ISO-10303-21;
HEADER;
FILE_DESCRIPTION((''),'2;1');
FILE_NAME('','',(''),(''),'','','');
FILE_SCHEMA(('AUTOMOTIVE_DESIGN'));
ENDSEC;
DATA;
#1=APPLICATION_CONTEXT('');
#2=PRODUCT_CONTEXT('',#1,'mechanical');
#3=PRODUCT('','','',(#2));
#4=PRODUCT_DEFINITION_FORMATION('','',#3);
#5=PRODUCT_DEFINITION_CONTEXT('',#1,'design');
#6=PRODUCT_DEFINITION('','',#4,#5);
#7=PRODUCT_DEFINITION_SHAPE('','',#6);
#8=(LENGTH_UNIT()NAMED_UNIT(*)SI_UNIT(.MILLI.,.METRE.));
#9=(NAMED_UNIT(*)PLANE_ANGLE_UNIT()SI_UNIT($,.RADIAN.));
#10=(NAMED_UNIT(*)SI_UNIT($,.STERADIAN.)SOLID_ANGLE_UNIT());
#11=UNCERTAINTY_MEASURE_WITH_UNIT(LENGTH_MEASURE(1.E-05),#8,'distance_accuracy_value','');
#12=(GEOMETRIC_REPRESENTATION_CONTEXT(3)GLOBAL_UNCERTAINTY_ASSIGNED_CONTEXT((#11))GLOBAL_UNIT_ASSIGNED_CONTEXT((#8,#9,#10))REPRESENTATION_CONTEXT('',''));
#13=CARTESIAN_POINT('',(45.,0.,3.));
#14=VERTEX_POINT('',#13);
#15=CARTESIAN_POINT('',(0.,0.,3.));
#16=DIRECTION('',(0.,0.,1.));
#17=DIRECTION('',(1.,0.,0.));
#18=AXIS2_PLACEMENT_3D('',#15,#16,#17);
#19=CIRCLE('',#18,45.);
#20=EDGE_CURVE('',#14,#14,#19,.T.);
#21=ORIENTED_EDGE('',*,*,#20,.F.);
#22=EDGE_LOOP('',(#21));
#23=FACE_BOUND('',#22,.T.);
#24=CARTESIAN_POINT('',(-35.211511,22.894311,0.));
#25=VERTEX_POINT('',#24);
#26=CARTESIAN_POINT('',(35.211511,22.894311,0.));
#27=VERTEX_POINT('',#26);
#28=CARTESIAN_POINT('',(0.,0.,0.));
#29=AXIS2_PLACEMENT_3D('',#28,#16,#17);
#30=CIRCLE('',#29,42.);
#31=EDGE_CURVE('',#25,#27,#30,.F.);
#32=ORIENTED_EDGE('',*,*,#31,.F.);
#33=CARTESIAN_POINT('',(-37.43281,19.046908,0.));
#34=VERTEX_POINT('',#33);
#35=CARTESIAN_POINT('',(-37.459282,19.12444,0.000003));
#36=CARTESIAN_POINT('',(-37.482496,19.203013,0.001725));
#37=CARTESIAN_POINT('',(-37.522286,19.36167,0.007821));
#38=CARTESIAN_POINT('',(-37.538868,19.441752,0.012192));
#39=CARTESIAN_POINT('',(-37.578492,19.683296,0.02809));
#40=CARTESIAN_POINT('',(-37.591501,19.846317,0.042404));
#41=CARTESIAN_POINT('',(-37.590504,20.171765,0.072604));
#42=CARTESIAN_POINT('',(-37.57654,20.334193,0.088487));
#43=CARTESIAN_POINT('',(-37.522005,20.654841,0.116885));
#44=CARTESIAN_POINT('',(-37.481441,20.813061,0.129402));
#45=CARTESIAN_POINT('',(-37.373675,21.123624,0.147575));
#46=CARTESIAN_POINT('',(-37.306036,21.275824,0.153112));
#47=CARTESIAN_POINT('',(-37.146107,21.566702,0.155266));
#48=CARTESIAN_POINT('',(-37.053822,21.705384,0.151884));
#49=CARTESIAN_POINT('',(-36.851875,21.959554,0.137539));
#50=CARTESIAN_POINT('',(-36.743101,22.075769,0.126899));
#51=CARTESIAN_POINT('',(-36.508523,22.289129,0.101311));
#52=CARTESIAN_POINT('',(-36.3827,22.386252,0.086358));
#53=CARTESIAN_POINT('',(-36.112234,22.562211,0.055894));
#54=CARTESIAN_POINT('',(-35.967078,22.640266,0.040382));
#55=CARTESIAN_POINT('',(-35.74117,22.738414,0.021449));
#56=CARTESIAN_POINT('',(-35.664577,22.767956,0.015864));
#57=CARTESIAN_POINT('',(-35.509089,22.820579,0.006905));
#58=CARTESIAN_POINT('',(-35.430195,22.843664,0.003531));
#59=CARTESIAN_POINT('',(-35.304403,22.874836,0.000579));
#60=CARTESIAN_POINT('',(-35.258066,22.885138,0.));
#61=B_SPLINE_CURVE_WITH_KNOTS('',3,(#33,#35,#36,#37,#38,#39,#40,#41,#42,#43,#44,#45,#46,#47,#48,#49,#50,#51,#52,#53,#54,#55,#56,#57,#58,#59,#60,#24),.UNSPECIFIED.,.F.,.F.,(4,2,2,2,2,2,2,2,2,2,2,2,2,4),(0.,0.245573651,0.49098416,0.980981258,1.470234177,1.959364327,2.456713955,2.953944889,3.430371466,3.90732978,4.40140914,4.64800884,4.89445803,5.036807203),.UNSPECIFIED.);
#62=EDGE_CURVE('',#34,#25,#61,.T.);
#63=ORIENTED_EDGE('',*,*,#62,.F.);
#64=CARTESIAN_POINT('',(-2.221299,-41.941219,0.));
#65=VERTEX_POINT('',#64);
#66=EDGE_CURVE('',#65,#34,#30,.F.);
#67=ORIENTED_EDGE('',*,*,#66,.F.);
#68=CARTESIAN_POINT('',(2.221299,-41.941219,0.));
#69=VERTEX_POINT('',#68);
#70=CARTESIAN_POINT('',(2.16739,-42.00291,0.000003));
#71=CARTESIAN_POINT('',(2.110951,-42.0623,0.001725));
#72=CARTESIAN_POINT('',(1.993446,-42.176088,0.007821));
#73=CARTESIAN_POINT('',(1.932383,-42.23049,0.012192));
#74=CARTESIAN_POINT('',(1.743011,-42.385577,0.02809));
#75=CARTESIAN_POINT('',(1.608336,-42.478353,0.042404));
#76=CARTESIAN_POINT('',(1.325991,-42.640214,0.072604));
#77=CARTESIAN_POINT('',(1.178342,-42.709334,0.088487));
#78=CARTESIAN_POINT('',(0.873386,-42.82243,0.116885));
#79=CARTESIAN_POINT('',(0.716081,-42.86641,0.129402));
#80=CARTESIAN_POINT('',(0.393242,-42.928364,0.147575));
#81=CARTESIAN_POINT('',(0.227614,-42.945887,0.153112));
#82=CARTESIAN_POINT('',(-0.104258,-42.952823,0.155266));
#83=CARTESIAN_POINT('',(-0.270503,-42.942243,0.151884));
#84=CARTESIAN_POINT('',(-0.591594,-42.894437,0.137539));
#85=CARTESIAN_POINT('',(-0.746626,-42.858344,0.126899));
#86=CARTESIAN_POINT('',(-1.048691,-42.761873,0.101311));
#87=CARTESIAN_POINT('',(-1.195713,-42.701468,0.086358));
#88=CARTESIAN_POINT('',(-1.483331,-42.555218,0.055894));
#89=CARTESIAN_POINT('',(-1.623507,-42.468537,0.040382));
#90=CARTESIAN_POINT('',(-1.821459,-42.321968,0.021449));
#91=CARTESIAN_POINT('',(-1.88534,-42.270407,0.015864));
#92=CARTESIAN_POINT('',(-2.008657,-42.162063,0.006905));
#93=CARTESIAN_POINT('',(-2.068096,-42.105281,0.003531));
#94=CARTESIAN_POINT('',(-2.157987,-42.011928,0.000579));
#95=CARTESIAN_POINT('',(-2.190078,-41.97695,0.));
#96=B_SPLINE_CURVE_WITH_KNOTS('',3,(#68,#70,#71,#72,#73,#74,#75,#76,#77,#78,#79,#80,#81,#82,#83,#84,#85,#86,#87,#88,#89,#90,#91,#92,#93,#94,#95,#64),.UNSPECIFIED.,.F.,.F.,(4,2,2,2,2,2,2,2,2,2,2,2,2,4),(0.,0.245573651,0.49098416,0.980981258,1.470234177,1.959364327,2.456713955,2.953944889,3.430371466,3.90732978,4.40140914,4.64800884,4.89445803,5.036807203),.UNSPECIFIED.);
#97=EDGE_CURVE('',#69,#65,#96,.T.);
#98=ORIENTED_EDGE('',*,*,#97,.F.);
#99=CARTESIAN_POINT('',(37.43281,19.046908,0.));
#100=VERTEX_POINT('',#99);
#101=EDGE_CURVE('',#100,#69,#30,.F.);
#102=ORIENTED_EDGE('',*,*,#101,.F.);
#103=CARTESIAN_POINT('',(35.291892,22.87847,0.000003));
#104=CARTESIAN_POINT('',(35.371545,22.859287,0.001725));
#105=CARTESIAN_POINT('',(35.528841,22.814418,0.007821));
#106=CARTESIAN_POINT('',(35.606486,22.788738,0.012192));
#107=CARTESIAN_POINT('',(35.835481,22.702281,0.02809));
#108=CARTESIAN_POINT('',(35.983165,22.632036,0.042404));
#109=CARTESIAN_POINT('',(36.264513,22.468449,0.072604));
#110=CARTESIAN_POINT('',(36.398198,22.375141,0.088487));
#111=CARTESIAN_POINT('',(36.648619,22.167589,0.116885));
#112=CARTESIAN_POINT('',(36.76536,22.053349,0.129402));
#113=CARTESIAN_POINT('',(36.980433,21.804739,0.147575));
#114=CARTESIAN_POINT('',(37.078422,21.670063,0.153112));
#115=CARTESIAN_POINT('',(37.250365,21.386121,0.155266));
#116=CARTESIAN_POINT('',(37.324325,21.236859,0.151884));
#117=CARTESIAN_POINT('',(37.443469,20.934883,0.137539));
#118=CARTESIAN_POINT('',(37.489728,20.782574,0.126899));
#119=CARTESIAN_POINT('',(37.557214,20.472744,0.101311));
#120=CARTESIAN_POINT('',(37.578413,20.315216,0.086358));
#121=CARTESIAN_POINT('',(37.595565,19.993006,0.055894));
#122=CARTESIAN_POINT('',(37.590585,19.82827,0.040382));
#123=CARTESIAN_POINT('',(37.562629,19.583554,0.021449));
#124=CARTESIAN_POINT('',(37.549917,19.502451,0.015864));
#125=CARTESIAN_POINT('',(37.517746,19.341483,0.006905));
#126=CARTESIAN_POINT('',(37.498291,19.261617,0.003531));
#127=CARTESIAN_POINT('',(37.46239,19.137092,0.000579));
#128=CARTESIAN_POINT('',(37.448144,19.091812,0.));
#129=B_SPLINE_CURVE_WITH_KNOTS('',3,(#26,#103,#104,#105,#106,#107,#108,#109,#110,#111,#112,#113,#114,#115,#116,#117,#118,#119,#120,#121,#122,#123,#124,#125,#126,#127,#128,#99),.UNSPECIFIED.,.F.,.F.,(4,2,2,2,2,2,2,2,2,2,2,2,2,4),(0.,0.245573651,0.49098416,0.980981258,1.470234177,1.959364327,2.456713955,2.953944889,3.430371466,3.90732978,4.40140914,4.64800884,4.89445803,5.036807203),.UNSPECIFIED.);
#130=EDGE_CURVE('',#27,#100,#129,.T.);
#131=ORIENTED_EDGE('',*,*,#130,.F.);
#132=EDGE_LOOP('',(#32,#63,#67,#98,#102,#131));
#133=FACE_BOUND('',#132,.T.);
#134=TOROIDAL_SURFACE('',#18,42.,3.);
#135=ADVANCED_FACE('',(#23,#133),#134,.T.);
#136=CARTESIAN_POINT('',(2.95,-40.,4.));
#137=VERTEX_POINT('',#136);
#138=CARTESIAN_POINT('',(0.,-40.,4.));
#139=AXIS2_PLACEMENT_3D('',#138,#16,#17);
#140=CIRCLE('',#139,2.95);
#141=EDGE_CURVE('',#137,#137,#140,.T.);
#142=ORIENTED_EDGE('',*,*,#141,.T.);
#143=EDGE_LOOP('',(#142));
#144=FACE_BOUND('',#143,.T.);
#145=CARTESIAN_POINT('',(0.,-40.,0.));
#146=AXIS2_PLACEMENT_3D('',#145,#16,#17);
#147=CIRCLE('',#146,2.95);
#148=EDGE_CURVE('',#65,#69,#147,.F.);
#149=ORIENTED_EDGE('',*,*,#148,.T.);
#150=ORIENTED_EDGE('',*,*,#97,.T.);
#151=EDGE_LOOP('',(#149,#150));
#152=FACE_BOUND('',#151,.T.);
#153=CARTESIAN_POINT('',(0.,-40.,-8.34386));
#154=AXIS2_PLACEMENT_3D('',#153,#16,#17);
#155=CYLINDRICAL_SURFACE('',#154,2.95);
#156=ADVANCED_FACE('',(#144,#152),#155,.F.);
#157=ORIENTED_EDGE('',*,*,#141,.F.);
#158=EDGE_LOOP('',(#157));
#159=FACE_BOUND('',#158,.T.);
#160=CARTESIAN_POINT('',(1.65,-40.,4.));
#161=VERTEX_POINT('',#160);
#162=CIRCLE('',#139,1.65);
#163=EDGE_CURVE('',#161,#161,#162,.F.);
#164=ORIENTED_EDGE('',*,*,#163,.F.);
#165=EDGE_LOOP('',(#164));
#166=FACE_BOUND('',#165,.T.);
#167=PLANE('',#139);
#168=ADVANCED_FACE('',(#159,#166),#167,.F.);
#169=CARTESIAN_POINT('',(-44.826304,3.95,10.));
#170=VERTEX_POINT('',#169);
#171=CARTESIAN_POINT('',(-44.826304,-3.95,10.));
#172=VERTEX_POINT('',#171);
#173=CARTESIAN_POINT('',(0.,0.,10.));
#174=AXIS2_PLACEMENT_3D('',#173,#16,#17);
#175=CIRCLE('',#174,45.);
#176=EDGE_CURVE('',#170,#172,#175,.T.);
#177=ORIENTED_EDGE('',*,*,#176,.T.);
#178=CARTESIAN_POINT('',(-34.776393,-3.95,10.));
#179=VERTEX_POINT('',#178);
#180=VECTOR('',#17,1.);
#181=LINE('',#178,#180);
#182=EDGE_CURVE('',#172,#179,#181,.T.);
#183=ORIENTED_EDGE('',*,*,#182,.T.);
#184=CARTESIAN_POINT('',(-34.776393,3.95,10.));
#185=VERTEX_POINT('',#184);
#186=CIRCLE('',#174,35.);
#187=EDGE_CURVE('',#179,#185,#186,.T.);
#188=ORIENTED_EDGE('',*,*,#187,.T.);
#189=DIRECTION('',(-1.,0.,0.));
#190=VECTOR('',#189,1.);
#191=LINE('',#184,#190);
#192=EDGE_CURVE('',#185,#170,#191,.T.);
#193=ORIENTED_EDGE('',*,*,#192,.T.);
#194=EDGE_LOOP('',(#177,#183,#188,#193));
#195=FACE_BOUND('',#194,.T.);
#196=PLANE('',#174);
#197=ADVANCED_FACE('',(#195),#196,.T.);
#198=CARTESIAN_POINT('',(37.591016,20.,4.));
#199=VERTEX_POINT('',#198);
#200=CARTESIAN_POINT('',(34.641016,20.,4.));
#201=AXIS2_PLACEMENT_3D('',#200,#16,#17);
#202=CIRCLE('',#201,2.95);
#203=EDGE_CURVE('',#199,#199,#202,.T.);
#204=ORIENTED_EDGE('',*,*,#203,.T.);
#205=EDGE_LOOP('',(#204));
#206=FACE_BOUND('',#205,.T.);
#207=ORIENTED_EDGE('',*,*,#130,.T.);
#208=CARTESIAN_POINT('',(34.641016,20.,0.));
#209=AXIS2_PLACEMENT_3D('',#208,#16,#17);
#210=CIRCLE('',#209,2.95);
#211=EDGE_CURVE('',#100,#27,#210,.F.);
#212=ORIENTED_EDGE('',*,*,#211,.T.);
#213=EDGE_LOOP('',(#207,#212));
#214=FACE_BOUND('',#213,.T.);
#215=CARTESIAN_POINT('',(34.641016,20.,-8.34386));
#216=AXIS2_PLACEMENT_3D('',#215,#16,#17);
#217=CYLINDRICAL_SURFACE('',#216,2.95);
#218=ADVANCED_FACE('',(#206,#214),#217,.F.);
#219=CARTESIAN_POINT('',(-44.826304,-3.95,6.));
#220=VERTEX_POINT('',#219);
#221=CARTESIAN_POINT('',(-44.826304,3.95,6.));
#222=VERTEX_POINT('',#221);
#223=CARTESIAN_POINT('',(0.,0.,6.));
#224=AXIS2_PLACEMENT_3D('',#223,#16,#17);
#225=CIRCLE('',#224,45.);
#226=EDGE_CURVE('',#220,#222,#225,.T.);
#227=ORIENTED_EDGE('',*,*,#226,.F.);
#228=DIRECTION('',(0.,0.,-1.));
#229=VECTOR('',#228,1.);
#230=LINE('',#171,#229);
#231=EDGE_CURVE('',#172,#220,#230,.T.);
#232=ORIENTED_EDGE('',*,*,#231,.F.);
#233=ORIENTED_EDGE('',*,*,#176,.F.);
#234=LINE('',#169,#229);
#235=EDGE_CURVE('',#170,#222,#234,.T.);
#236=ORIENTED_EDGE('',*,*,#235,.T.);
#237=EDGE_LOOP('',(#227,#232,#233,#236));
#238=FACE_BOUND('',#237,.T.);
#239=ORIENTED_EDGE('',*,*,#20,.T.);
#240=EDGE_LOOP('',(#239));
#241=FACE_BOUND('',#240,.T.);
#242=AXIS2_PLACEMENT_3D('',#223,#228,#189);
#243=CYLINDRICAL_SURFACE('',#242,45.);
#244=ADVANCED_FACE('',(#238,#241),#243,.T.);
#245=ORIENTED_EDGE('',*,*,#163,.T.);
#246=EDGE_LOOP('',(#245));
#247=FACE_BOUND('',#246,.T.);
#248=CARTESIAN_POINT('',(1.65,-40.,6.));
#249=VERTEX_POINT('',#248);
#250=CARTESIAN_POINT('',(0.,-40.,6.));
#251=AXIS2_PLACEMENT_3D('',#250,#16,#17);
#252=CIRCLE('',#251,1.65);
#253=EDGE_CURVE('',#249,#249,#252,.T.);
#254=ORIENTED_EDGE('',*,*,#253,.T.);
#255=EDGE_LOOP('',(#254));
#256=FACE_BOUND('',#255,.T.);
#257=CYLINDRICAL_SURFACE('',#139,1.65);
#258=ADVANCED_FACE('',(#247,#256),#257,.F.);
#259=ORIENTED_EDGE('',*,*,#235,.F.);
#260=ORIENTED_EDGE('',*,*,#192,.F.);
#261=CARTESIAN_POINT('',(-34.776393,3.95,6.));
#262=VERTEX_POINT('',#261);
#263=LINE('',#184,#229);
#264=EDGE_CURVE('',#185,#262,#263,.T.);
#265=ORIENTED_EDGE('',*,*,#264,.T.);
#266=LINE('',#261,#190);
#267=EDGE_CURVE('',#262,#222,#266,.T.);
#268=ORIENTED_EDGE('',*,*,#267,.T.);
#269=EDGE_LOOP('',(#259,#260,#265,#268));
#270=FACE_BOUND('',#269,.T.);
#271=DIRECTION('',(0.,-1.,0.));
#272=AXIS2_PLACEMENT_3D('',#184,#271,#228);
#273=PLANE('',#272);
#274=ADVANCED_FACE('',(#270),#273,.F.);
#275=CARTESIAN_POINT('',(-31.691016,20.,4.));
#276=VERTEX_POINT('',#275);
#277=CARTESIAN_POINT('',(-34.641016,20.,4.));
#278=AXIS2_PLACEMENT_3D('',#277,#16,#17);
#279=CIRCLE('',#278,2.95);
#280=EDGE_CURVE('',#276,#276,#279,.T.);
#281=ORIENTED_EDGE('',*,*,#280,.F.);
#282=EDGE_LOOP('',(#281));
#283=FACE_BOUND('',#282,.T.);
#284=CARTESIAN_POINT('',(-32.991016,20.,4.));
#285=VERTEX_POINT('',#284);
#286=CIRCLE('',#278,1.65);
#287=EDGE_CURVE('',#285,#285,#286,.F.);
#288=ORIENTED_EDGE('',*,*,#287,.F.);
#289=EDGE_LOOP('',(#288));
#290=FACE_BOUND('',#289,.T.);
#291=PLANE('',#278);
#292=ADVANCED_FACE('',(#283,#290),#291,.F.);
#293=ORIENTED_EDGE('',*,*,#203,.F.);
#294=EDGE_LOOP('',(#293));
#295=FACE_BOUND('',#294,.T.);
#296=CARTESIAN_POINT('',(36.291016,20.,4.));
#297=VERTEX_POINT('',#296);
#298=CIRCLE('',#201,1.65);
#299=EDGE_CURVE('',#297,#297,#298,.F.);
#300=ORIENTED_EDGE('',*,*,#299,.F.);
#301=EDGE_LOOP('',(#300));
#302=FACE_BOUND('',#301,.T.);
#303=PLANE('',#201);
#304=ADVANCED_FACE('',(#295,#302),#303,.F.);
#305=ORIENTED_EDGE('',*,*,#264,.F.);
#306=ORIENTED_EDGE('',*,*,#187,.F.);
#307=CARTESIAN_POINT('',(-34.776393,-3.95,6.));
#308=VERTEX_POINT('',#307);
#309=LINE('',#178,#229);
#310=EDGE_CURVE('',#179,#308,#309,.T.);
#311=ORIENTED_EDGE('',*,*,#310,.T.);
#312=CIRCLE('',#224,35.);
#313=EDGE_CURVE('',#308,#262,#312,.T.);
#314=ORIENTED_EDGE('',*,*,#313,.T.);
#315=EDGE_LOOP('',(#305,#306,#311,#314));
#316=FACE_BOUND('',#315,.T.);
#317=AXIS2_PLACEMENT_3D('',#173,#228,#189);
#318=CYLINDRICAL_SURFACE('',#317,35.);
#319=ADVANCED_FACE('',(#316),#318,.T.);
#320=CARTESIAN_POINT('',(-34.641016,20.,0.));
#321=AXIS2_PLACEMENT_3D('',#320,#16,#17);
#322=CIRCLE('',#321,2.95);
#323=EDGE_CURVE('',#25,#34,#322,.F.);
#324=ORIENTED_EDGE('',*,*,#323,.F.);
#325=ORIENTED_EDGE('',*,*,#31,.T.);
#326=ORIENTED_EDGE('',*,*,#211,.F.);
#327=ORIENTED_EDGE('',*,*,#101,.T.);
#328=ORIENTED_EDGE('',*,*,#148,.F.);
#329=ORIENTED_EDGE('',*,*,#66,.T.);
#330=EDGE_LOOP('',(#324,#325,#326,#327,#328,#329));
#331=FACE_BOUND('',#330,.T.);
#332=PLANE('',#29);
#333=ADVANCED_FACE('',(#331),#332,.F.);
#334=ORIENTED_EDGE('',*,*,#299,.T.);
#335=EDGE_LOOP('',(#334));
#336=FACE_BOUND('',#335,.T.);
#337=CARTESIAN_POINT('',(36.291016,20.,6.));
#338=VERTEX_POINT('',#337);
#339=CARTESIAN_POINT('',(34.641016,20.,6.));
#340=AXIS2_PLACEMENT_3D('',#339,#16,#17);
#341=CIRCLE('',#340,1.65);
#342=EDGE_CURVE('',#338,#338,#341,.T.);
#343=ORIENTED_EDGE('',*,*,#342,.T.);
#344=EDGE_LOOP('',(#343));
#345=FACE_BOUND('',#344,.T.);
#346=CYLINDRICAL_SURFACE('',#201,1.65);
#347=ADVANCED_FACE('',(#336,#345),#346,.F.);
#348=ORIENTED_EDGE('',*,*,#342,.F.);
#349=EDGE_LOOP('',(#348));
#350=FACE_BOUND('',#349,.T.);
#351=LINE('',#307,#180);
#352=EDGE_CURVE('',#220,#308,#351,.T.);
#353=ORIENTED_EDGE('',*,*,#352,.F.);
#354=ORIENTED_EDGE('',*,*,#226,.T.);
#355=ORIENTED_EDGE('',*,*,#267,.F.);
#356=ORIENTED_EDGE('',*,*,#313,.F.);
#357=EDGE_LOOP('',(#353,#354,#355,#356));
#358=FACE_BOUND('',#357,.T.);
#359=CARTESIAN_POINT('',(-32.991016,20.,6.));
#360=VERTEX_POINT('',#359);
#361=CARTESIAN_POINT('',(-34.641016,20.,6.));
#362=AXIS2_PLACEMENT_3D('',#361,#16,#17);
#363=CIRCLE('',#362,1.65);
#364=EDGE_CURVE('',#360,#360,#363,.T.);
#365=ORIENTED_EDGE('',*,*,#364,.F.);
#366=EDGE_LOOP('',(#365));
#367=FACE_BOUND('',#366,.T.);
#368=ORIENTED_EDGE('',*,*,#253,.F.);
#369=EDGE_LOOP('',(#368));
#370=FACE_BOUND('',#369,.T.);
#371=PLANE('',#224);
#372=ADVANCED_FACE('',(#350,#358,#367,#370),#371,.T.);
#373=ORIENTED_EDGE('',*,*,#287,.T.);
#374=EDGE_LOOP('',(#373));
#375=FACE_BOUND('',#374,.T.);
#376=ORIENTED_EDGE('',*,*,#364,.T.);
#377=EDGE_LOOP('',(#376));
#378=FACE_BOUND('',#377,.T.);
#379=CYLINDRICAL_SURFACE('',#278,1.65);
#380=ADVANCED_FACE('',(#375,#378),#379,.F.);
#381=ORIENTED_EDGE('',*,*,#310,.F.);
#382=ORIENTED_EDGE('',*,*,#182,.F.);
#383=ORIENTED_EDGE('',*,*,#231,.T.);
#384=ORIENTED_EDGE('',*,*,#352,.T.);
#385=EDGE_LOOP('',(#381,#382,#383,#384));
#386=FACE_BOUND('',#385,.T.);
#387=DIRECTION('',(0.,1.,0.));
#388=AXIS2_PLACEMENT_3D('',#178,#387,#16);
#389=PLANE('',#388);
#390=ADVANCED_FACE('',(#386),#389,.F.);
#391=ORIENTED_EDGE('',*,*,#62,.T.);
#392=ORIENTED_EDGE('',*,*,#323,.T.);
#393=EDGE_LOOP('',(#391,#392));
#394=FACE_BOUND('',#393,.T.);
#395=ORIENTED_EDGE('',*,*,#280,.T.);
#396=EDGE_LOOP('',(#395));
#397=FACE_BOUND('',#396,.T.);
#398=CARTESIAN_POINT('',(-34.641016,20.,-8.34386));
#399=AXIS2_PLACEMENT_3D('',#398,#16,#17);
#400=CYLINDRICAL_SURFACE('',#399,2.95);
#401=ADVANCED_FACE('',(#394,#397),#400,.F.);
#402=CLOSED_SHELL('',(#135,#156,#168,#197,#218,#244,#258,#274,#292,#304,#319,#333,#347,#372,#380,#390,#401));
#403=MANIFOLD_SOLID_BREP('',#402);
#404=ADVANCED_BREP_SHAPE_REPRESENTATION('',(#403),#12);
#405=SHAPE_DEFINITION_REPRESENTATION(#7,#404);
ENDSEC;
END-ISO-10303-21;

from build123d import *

# Parameters (mm, degrees)
ESBO_O1_R                = 45
RESSALTO_EXTRUS_O1_DEPTH = 6
RESSALTO_EXTRUS_O2_DEPTH = 4
ESBO_O4_R                = 1.65
CORTE_EXTRUS_O1_DEPTH    = 2
ESBO_O5_R                = 2.95
CORTE_EXTRUS_O2_DEPTH    = 4
FILETE1_R                = 3


with BuildPart() as part:
    # Esboço1 → Ressalto-extrusão1 (new body)
    with BuildSketch(Plane.XY):
        Circle(ESBO_O1_R)
    extrude(amount=RESSALTO_EXTRUS_O1_DEPTH)

    # Esboço3 → Ressalto-extrusão2 (add)
    with BuildSketch(Plane.XY.offset(6)):
        with BuildLine():
            Line((-34.776392855, 3.95), (-44.826303662, 3.95))
            ThreePointArc((-44.826303662, 3.95), (-45, 0), (-44.826303662, -3.95))
            Line((-44.826303662, -3.95), (-34.776392855, -3.95))
            ThreePointArc((-34.776392855, -3.95), (35, 0), (-34.776392855, 3.95))
        make_face()
    extrude(amount=RESSALTO_EXTRUS_O2_DEPTH)

    # Esboço4 → Corte-extrusão1 (cut)
    with BuildSketch(Plane.XY.offset(6)):
        with Locations((0, -40)):
            Circle(ESBO_O4_R)
        with Locations((-34.641016151, 20)):
            Circle(ESBO_O4_R)
        with Locations((34.641016151, 20)):
            Circle(ESBO_O4_R)
    extrude(amount=-CORTE_EXTRUS_O1_DEPTH, mode=Mode.SUBTRACT)

    # Esboço5 → Corte-extrusão2 (cut)
    with BuildSketch(Plane.XY.offset(4)):
        with Locations((0, -40)):
            Circle(ESBO_O5_R)
        with Locations((-34.641016151, 20)):
            Circle(ESBO_O5_R)
        with Locations((34.641016151, 20)):
            Circle(ESBO_O5_R)
    extrude(amount=-CORTE_EXTRUS_O2_DEPTH, mode=Mode.SUBTRACT)

    # Filete1
    # the kernel refuses this fillet: 3 mm, written as the material it takes off along each edge
    with BuildSketch(Plane(origin=(0, 0, 0), x_dir=(1, 0, 0), z_dir=(0, -1, 0))) as filete1_piece_1:
        with BuildLine():
            CenterArc((45 - FILETE1_R, FILETE1_R), FILETE1_R, 270, 90)
            Line((45 - FILETE1_R, 0), (45, 0))
            Line((45, 0), (45, FILETE1_R))
        make_face()
    revolve(axis=Axis((0, 0, 0), (0, 0, 1)), mode=Mode.SUBTRACT)


solid = part.part
